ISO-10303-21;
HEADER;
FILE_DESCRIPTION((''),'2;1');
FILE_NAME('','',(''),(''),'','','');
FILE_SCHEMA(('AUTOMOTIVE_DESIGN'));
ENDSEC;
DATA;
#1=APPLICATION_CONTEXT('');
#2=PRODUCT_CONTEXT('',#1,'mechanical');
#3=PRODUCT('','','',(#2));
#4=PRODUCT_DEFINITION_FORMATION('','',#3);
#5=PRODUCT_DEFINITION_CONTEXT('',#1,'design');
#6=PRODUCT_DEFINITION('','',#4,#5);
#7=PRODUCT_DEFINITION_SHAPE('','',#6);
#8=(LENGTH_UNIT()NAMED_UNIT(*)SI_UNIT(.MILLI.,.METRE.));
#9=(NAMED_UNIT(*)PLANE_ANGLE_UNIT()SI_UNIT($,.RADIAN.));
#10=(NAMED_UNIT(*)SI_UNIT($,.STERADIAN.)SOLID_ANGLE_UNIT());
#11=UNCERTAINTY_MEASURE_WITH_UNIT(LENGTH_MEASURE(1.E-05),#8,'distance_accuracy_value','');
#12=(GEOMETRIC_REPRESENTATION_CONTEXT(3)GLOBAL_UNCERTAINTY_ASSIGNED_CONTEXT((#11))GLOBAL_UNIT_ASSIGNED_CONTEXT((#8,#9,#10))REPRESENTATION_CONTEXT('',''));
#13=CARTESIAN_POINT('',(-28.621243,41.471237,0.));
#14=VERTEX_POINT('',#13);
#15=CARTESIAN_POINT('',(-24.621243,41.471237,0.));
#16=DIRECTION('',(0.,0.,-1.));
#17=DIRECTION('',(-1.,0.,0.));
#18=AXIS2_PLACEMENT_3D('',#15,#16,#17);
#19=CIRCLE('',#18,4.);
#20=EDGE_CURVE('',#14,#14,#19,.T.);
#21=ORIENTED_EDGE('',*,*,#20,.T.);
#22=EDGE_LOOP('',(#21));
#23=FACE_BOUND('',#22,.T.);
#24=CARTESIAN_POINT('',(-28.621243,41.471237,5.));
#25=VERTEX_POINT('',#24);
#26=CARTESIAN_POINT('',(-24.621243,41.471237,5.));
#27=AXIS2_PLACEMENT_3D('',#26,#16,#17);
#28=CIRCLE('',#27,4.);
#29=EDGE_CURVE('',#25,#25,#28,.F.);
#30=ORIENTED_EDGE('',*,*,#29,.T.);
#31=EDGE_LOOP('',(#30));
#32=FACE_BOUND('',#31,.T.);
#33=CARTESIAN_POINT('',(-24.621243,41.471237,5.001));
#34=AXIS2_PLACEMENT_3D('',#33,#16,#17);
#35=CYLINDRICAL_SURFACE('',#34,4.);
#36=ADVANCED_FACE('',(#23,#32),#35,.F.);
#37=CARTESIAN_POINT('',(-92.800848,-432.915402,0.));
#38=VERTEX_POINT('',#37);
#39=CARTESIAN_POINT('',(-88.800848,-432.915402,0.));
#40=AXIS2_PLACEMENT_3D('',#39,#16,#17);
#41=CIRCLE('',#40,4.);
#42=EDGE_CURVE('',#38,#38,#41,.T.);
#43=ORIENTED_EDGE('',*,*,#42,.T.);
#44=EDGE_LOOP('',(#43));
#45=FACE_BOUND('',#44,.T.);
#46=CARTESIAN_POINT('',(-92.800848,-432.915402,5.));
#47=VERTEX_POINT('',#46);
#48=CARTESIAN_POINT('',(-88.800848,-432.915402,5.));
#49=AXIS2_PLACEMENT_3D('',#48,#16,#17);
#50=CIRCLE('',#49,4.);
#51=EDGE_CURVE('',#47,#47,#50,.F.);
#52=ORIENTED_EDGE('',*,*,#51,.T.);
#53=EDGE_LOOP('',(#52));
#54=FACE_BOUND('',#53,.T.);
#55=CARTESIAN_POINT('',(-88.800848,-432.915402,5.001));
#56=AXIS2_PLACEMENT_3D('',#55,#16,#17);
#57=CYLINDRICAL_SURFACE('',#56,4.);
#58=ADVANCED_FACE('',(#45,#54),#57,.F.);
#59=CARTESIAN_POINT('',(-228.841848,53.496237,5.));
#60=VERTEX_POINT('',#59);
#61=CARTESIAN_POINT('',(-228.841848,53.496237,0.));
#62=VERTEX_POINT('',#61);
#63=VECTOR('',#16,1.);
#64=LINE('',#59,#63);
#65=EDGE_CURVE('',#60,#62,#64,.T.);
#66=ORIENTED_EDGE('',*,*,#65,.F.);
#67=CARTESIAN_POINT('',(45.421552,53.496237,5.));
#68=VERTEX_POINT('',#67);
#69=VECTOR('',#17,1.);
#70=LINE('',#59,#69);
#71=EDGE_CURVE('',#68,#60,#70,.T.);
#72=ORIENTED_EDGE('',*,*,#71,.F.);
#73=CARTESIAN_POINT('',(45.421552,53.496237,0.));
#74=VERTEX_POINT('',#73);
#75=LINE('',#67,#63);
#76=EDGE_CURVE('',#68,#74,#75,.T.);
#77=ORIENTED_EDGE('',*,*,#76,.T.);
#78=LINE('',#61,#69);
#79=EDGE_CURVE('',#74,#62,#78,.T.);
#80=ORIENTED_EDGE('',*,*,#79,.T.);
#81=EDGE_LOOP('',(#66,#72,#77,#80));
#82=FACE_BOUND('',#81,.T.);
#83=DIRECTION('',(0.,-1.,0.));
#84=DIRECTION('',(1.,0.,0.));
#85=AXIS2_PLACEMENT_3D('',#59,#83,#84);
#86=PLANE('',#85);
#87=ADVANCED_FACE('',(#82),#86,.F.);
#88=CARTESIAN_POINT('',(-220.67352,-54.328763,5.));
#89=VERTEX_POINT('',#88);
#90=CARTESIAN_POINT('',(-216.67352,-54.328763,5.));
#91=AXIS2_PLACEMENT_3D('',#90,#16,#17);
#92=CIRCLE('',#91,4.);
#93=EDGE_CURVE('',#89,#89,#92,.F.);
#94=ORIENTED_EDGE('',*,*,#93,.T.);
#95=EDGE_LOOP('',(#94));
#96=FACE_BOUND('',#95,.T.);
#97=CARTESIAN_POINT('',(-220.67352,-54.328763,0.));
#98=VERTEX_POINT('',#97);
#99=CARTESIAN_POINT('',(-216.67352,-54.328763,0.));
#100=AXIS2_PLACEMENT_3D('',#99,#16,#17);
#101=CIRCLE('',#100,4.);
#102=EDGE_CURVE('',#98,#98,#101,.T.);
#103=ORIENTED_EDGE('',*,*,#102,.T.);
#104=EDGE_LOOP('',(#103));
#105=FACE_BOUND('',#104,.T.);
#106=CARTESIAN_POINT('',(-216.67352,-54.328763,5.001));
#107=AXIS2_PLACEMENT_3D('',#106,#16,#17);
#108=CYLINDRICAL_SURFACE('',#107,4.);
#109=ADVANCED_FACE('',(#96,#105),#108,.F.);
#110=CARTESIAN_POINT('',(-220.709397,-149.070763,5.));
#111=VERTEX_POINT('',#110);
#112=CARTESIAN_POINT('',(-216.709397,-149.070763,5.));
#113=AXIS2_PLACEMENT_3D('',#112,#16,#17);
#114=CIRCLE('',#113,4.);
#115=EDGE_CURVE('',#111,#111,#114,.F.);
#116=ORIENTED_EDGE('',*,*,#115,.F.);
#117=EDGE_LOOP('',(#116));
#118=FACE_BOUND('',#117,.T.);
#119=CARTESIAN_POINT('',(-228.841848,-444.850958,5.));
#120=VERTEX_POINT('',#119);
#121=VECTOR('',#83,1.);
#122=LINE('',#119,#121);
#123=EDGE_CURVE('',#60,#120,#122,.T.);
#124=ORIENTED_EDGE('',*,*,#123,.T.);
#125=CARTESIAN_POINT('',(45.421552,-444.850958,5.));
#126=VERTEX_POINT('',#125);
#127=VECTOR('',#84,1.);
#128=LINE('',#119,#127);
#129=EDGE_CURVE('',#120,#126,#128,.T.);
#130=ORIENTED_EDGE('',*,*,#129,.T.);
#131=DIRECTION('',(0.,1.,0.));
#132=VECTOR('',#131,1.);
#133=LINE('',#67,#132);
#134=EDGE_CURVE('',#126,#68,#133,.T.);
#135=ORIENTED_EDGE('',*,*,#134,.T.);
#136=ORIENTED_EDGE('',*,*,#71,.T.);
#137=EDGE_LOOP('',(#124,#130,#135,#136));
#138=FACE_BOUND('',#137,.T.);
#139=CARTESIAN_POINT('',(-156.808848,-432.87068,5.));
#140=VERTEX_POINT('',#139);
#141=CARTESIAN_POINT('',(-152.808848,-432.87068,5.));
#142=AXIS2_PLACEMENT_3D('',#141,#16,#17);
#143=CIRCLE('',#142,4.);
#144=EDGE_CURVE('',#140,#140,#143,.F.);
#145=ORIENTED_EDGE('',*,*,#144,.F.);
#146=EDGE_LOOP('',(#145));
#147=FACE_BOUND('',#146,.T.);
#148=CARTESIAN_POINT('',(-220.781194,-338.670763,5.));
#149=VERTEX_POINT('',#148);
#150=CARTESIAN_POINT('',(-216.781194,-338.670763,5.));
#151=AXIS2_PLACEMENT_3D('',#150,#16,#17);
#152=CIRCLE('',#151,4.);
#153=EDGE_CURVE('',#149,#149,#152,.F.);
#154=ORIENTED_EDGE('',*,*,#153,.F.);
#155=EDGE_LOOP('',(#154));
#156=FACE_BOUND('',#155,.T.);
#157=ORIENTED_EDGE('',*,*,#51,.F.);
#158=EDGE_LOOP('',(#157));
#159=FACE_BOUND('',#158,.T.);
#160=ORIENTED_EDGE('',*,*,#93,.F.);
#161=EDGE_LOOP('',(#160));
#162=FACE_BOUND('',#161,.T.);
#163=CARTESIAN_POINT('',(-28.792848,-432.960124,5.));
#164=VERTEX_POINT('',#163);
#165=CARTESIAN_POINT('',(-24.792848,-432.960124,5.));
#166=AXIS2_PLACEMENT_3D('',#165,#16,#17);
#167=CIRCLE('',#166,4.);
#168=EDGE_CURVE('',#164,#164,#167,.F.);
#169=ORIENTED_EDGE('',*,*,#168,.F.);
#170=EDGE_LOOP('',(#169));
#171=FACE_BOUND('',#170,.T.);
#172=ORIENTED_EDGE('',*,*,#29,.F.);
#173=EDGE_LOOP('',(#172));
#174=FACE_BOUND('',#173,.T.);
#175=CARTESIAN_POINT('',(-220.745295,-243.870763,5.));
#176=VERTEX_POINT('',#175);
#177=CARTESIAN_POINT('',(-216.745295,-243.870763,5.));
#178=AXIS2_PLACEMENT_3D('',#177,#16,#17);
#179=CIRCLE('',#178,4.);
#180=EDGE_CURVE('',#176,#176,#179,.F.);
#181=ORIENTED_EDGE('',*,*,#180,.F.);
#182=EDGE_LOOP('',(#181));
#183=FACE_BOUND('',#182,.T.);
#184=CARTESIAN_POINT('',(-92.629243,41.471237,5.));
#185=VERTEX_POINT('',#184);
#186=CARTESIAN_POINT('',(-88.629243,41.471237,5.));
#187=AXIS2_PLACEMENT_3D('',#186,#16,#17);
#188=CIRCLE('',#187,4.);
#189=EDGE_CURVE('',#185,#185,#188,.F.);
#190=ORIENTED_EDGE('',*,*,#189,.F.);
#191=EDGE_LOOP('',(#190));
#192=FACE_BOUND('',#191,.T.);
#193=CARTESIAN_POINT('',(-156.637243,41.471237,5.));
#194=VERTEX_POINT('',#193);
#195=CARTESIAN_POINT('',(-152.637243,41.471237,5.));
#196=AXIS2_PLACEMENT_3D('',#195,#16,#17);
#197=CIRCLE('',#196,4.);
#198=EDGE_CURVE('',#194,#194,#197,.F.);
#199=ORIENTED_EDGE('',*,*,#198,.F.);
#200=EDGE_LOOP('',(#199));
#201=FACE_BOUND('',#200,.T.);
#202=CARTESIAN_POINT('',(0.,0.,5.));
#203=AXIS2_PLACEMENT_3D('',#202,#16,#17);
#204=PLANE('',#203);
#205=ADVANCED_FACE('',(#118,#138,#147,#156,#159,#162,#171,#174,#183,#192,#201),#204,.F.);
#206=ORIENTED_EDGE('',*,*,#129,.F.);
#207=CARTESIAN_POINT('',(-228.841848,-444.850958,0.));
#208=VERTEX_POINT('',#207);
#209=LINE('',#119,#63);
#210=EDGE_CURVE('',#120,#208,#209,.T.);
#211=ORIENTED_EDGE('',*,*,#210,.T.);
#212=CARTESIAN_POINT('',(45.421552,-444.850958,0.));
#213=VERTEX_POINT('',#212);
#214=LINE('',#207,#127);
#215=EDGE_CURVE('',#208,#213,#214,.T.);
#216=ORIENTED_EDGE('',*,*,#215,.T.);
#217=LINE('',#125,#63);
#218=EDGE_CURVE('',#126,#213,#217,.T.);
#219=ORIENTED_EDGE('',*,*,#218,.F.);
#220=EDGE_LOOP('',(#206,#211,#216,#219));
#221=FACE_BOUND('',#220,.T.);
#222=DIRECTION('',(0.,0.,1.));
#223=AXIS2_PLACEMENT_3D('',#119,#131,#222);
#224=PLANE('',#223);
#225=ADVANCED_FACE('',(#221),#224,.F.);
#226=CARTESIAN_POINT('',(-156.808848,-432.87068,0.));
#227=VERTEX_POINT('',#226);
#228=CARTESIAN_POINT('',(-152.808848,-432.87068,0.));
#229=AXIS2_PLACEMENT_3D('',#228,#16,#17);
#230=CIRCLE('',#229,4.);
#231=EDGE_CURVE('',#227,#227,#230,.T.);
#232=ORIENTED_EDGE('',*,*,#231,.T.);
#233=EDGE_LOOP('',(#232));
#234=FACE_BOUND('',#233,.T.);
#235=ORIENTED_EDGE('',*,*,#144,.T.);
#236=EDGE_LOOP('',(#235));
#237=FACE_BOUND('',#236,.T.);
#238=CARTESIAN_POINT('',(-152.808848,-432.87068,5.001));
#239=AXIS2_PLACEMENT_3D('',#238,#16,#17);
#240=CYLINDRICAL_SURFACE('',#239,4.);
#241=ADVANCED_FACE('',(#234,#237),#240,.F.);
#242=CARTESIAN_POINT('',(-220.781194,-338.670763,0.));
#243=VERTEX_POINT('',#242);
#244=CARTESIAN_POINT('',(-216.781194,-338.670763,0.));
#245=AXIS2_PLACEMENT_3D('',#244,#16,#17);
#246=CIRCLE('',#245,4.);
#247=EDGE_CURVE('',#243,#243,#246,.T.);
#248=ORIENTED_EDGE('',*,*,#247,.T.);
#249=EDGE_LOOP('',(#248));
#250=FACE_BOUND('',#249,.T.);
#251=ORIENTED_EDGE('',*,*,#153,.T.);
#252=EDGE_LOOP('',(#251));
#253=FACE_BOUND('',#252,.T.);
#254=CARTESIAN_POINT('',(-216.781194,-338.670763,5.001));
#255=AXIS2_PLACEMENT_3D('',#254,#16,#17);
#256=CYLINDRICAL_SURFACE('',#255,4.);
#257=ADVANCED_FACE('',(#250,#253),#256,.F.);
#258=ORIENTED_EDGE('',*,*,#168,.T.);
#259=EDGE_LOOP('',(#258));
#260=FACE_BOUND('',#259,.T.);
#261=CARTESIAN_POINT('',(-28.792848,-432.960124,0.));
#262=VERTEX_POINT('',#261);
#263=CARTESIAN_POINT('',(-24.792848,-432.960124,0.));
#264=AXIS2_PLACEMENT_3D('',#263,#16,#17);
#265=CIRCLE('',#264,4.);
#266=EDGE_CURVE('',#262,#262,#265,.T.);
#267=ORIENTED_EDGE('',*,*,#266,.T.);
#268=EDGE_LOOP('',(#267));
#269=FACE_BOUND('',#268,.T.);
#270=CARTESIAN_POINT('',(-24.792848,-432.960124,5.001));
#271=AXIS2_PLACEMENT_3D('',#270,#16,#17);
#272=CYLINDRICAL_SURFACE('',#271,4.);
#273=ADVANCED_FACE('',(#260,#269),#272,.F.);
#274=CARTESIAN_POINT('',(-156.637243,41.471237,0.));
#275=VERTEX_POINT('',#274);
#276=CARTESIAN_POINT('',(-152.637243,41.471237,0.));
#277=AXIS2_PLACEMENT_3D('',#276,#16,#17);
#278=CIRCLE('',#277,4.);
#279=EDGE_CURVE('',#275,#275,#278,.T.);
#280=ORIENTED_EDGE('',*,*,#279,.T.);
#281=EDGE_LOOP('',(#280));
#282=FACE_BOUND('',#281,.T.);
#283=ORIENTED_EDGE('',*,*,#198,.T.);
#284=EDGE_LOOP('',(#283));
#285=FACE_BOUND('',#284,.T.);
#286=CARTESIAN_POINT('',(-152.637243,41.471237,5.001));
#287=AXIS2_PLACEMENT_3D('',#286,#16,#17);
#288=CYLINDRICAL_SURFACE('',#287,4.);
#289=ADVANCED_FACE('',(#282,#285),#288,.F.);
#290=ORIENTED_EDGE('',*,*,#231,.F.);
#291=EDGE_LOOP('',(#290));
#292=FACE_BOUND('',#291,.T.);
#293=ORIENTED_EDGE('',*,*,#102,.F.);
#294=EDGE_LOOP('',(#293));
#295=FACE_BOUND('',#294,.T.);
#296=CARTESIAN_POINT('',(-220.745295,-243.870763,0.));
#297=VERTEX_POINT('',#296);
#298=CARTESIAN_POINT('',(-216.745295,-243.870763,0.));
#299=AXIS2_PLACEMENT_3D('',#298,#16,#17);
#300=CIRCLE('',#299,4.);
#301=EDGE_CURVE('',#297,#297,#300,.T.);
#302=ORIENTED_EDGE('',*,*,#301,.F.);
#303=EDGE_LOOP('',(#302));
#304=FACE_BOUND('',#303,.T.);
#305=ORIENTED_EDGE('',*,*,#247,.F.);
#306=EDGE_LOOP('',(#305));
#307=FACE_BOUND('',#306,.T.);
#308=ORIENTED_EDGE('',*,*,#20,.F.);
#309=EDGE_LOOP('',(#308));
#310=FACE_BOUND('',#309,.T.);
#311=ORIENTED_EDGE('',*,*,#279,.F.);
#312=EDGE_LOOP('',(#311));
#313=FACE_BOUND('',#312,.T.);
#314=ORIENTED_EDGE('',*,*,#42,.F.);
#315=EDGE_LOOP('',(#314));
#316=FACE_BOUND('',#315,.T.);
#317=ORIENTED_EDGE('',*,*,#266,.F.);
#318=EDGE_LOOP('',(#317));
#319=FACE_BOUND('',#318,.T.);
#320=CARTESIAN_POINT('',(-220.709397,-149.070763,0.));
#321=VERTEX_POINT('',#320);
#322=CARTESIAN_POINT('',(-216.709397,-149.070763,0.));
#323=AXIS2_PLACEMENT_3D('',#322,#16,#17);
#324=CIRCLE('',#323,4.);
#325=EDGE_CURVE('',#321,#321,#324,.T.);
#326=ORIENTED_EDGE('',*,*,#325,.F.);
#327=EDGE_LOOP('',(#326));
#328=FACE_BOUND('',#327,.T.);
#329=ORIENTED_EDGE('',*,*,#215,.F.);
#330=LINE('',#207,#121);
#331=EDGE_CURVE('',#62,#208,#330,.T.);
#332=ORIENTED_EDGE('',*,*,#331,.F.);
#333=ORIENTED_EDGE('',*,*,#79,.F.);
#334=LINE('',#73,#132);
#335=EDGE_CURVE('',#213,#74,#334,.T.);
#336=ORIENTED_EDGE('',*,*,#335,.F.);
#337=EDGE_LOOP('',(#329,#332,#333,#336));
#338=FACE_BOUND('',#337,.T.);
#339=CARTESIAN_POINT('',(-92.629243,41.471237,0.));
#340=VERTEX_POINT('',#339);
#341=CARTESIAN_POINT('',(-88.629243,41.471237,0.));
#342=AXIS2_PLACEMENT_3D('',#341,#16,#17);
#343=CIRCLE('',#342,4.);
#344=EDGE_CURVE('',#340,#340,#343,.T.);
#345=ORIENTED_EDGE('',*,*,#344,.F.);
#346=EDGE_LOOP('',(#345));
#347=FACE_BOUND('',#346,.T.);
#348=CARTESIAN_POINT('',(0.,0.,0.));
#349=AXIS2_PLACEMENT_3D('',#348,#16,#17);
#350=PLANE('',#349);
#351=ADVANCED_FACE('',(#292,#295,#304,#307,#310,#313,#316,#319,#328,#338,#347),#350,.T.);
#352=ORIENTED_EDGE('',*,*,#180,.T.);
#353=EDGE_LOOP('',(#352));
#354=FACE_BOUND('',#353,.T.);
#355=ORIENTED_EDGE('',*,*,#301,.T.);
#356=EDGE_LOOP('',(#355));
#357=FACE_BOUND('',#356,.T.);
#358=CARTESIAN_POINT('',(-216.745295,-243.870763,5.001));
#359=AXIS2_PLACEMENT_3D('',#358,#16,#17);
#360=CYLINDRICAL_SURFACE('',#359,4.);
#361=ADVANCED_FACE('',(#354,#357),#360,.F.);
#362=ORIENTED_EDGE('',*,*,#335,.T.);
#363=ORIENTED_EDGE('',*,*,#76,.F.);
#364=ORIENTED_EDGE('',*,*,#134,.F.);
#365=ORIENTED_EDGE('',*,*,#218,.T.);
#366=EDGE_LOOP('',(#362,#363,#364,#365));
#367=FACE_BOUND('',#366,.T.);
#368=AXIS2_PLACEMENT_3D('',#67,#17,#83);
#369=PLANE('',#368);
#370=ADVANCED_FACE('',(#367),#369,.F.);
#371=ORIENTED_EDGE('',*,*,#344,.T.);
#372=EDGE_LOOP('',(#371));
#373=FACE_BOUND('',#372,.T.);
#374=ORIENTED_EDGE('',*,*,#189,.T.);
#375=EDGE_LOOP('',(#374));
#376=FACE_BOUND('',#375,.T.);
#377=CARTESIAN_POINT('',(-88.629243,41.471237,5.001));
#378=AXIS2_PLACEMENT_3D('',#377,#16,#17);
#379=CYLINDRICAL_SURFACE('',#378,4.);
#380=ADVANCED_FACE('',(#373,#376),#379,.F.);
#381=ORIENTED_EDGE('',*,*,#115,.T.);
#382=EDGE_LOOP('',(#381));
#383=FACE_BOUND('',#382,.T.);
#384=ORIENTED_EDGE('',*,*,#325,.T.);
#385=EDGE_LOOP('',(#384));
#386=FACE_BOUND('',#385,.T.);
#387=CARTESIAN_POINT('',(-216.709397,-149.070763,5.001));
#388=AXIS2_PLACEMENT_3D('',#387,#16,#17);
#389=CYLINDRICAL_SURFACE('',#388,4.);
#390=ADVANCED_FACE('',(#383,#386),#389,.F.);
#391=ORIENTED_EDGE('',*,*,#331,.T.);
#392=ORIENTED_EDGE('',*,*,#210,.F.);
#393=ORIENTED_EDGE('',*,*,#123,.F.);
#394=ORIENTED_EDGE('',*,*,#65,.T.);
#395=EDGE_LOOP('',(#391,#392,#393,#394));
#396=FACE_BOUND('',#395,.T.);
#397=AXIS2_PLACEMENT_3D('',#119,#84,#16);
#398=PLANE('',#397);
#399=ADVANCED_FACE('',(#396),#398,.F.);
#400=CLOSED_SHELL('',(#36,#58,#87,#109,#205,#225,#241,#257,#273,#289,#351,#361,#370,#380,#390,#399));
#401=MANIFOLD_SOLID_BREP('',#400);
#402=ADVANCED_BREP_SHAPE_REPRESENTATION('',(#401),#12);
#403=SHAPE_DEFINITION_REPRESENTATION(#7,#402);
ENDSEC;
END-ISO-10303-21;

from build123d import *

# Parameters (mm, degrees)
BASE_FLANGE1_OUTLINE_W = 274.2634
BASE_FLANGE1_OUTLINE_H = 498.347194877
BASE_FLANGE1_DEPTH     = 5
CUT_EXTRUDE1_REACH     = 502.286
SKETCH6_R              = 4


# Read off the part's stored shape, not the designer's step: Base-Flange1
with BuildPart() as part:
    # Base-Flange1 outline → Base-Flange1 (new body)
    with BuildSketch(Plane.XY):
        with Locations((-91.710148042, -195.677360812)):
            Rectangle(BASE_FLANGE1_OUTLINE_W, BASE_FLANGE1_OUTLINE_H)
    extrude(amount=BASE_FLANGE1_DEPTH)

    # Sketch6 → Cut-Extrude1 (cut, up to next)
    with BuildSketch(Plane(origin=(0, 0, 0), x_dir=(-1, 0, 0), z_dir=(0, 0, -1)), mode=Mode.PRIVATE) as cut_extrude1_sk1:
        with Locations((152.63724292, 41.471236627)):
            Circle(SKETCH6_R)
    cut_extrude1_tool1 = extrude(cut_extrude1_sk1.sketch, amount=-CUT_EXTRUDE1_REACH, mode=Mode.PRIVATE) & part.part
    # Sketch6 → Cut-Extrude1 (cut, up to next)
    with BuildSketch(Plane(origin=(0, 0, 0), x_dir=(-1, 0, 0), z_dir=(0, 0, -1)), mode=Mode.PRIVATE) as cut_extrude1_sk2:
        with Locations((88.62924292, 41.471236627)):
            Circle(SKETCH6_R)
    cut_extrude1_tool2 = extrude(cut_extrude1_sk2.sketch, amount=-CUT_EXTRUDE1_REACH, mode=Mode.PRIVATE) & part.part
    # Sketch6 → Cut-Extrude1 (cut, up to next)
    with BuildSketch(Plane(origin=(0, 0, 0), x_dir=(-1, 0, 0), z_dir=(0, 0, -1)), mode=Mode.PRIVATE) as cut_extrude1_sk3:
        with Locations((24.62124292, 41.471236627)):
            Circle(SKETCH6_R)
    cut_extrude1_tool3 = extrude(cut_extrude1_sk3.sketch, amount=-CUT_EXTRUDE1_REACH, mode=Mode.PRIVATE) & part.part
    # Sketch6 → Cut-Extrude1 (cut, up to next)
    with BuildSketch(Plane(origin=(0, 0, 0), x_dir=(-1, 0, 0), z_dir=(0, 0, -1)), mode=Mode.PRIVATE) as cut_extrude1_sk4:
        with Locations((216.673520112, -54.328763373)):
            Circle(SKETCH6_R)
    cut_extrude1_tool4 = extrude(cut_extrude1_sk4.sketch, amount=-CUT_EXTRUDE1_REACH, mode=Mode.PRIVATE) & part.part
    # Sketch6 → Cut-Extrude1 (cut, up to next)
    with BuildSketch(Plane(origin=(0, 0, 0), x_dir=(-1, 0, 0), z_dir=(0, 0, -1)), mode=Mode.PRIVATE) as cut_extrude1_sk5:
        with Locations((216.709396665, -149.070763373)):
            Circle(SKETCH6_R)
    cut_extrude1_tool5 = extrude(cut_extrude1_sk5.sketch, amount=-CUT_EXTRUDE1_REACH, mode=Mode.PRIVATE) & part.part
    # Sketch6 → Cut-Extrude1 (cut, up to next)
    with BuildSketch(Plane(origin=(0, 0, 0), x_dir=(-1, 0, 0), z_dir=(0, 0, -1)), mode=Mode.PRIVATE) as cut_extrude1_sk6:
        with Locations((216.745295182, -243.870763373)):
            Circle(SKETCH6_R)
    cut_extrude1_tool6 = extrude(cut_extrude1_sk6.sketch, amount=-CUT_EXTRUDE1_REACH, mode=Mode.PRIVATE) & part.part
    # Sketch6 → Cut-Extrude1 (cut, up to next)
    with BuildSketch(Plane(origin=(0, 0, 0), x_dir=(-1, 0, 0), z_dir=(0, 0, -1)), mode=Mode.PRIVATE) as cut_extrude1_sk7:
        with Locations((216.781193698, -338.670763373)):
            Circle(SKETCH6_R)
    cut_extrude1_tool7 = extrude(cut_extrude1_sk7.sketch, amount=-CUT_EXTRUDE1_REACH, mode=Mode.PRIVATE) & part.part
    # Sketch6 → Cut-Extrude1 (cut, up to next)
    with BuildSketch(Plane(origin=(0, 0, 0), x_dir=(-1, 0, 0), z_dir=(0, 0, -1)), mode=Mode.PRIVATE) as cut_extrude1_sk8:
        with Locations((152.808848042, -432.870680177)):
            Circle(SKETCH6_R)
    cut_extrude1_tool8 = extrude(cut_extrude1_sk8.sketch, amount=-CUT_EXTRUDE1_REACH, mode=Mode.PRIVATE) & part.part
    # Sketch6 → Cut-Extrude1 (cut, up to next)
    with BuildSketch(Plane(origin=(0, 0, 0), x_dir=(-1, 0, 0), z_dir=(0, 0, -1)), mode=Mode.PRIVATE) as cut_extrude1_sk9:
        with Locations((88.800848042, -432.915402104)):
            Circle(SKETCH6_R)
    cut_extrude1_tool9 = extrude(cut_extrude1_sk9.sketch, amount=-CUT_EXTRUDE1_REACH, mode=Mode.PRIVATE) & part.part
    # Sketch6 → Cut-Extrude1 (cut, up to next)
    with BuildSketch(Plane(origin=(0, 0, 0), x_dir=(-1, 0, 0), z_dir=(0, 0, -1)), mode=Mode.PRIVATE) as cut_extrude1_sk10:
        with Locations((24.792848042, -432.960124031)):
            Circle(SKETCH6_R)
    cut_extrude1_tool10 = extrude(cut_extrude1_sk10.sketch, amount=-CUT_EXTRUDE1_REACH, mode=Mode.PRIVATE) & part.part
    add(cut_extrude1_tool1.solids().sort_by_distance((-152.637243, 41.471237, 0))[0], mode=Mode.SUBTRACT)
    add(cut_extrude1_tool2.solids().sort_by_distance((-88.629243, 41.471237, 0))[0], mode=Mode.SUBTRACT)
    add(cut_extrude1_tool3.solids().sort_by_distance((-24.621243, 41.471237, 0))[0], mode=Mode.SUBTRACT)
    add(cut_extrude1_tool4.solids().sort_by_distance((-216.67352, -54.328763, 0))[0], mode=Mode.SUBTRACT)
    add(cut_extrude1_tool5.solids().sort_by_distance((-216.709397, -149.070763, 0))[0], mode=Mode.SUBTRACT)
    add(cut_extrude1_tool6.solids().sort_by_distance((-216.745295, -243.870763, 0))[0], mode=Mode.SUBTRACT)
    add(cut_extrude1_tool7.solids().sort_by_distance((-216.781194, -338.670763, 0))[0], mode=Mode.SUBTRACT)
    add(cut_extrude1_tool8.solids().sort_by_distance((-152.808848, -432.87068, 0))[0], mode=Mode.SUBTRACT)
    add(cut_extrude1_tool9.solids().sort_by_distance((-88.800848, -432.915402, 0))[0], mode=Mode.SUBTRACT)
    add(cut_extrude1_tool10.solids().sort_by_distance((-24.792848, -432.960124, 0))[0], mode=Mode.SUBTRACT)


solid = part.part
